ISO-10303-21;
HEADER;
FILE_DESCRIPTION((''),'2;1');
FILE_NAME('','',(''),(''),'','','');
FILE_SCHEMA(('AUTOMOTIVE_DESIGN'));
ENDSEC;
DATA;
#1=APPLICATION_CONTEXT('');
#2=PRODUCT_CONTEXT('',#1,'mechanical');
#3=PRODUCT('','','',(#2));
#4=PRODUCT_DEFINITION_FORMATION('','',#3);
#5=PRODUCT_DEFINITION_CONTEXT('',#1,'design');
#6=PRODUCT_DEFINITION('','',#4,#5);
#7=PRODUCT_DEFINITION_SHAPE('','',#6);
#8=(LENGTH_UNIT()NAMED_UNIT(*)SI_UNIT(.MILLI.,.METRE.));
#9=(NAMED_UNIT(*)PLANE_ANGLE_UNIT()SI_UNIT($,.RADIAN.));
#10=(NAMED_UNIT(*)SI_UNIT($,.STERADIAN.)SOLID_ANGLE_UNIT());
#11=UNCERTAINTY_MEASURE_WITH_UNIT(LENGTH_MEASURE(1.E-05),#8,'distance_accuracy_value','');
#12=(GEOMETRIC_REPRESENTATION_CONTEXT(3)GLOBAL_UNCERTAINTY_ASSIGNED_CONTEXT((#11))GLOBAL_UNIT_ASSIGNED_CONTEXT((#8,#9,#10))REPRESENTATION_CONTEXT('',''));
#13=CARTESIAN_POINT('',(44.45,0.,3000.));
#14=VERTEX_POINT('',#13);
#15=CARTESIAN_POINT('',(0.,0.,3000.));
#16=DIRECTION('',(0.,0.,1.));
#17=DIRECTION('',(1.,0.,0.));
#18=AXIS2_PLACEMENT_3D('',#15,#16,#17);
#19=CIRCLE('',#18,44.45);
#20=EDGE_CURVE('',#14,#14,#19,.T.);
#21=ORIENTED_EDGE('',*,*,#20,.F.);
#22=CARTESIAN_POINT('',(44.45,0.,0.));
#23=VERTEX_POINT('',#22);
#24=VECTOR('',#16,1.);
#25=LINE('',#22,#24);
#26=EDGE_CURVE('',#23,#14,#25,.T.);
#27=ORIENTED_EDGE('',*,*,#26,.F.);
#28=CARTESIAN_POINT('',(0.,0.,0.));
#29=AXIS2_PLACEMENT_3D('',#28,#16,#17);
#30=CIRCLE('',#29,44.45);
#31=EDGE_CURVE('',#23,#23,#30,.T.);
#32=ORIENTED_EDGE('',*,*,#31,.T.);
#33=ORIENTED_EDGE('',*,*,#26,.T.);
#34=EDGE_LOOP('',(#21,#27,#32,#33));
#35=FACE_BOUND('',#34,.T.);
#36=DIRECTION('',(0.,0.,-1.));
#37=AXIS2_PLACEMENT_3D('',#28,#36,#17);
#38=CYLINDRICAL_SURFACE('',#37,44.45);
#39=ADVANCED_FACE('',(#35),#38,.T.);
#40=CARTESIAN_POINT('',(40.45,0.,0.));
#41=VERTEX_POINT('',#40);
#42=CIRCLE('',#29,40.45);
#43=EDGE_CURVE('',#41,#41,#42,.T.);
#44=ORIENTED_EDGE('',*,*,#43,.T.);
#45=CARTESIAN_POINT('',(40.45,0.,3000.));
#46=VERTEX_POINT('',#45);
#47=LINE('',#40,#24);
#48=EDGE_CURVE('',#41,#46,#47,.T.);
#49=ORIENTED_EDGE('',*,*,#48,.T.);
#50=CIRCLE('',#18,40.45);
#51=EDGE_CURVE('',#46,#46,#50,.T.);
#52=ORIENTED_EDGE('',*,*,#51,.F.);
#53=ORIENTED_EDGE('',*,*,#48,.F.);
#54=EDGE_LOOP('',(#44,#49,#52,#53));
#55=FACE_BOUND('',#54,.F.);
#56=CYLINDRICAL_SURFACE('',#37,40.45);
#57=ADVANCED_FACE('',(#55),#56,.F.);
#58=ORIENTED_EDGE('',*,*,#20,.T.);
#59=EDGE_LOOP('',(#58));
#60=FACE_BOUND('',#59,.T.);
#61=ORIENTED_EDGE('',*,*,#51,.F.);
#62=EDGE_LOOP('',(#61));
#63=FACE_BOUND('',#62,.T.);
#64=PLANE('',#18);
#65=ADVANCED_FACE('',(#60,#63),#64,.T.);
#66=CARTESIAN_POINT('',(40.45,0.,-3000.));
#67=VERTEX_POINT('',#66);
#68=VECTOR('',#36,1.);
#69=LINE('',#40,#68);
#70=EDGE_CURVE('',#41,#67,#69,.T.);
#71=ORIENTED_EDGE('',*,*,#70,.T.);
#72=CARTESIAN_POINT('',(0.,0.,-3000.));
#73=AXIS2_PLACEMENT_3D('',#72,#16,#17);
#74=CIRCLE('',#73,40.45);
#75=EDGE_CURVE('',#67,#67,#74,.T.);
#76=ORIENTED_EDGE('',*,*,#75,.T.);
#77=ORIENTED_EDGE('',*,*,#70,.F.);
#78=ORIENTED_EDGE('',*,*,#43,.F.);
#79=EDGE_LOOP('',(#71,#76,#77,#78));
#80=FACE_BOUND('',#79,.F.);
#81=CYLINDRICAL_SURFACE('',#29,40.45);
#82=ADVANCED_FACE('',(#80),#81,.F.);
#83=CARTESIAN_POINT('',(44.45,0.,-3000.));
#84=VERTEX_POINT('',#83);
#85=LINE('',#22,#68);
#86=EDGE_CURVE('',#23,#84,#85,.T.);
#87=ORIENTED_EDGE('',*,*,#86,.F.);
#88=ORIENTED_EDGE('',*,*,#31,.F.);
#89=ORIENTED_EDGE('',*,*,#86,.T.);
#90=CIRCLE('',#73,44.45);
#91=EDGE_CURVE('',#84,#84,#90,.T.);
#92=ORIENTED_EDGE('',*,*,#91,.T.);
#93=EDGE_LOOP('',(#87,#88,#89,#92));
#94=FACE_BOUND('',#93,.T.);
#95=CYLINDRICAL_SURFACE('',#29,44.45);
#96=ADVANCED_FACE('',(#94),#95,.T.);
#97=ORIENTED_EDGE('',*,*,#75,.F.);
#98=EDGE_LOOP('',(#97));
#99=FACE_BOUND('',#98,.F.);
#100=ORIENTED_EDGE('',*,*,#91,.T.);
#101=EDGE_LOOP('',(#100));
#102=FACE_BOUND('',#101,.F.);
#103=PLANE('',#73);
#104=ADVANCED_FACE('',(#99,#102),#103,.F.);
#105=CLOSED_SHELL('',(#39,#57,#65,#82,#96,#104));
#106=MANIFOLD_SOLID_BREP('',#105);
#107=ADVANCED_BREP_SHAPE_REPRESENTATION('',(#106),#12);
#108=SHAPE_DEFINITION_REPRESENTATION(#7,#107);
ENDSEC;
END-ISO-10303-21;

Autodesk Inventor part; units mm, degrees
ref_plane "YZ Plane" through (0, 0, 0) normal (1, 0, 0) x (0, 1, 0)
ref_plane "XZ Plane" through (0, 0, 0) normal (0, 1, 0) x (-1, 0, 0)
ref_plane "XY Plane" through (0, 0, 0) normal (0, 0, 1) x (1, 0, 0)
sketch "Schizzo1" plane through (0, 0, 0) normal (0, 0, 1) x (1, 0, 0)
  circle A0 centre (0, 0) radius 44.45
  circle A1 centre (0, 0) radius 40.45
  dimension "d0" = 88.9
  dimension "d1" = 80.9
  dimension "d2" = 4
extrude "Estrusione1" add sketch "Schizzo1" along normal mid plane 6000
properties part number "06-01-2023 Verga 88,9"
